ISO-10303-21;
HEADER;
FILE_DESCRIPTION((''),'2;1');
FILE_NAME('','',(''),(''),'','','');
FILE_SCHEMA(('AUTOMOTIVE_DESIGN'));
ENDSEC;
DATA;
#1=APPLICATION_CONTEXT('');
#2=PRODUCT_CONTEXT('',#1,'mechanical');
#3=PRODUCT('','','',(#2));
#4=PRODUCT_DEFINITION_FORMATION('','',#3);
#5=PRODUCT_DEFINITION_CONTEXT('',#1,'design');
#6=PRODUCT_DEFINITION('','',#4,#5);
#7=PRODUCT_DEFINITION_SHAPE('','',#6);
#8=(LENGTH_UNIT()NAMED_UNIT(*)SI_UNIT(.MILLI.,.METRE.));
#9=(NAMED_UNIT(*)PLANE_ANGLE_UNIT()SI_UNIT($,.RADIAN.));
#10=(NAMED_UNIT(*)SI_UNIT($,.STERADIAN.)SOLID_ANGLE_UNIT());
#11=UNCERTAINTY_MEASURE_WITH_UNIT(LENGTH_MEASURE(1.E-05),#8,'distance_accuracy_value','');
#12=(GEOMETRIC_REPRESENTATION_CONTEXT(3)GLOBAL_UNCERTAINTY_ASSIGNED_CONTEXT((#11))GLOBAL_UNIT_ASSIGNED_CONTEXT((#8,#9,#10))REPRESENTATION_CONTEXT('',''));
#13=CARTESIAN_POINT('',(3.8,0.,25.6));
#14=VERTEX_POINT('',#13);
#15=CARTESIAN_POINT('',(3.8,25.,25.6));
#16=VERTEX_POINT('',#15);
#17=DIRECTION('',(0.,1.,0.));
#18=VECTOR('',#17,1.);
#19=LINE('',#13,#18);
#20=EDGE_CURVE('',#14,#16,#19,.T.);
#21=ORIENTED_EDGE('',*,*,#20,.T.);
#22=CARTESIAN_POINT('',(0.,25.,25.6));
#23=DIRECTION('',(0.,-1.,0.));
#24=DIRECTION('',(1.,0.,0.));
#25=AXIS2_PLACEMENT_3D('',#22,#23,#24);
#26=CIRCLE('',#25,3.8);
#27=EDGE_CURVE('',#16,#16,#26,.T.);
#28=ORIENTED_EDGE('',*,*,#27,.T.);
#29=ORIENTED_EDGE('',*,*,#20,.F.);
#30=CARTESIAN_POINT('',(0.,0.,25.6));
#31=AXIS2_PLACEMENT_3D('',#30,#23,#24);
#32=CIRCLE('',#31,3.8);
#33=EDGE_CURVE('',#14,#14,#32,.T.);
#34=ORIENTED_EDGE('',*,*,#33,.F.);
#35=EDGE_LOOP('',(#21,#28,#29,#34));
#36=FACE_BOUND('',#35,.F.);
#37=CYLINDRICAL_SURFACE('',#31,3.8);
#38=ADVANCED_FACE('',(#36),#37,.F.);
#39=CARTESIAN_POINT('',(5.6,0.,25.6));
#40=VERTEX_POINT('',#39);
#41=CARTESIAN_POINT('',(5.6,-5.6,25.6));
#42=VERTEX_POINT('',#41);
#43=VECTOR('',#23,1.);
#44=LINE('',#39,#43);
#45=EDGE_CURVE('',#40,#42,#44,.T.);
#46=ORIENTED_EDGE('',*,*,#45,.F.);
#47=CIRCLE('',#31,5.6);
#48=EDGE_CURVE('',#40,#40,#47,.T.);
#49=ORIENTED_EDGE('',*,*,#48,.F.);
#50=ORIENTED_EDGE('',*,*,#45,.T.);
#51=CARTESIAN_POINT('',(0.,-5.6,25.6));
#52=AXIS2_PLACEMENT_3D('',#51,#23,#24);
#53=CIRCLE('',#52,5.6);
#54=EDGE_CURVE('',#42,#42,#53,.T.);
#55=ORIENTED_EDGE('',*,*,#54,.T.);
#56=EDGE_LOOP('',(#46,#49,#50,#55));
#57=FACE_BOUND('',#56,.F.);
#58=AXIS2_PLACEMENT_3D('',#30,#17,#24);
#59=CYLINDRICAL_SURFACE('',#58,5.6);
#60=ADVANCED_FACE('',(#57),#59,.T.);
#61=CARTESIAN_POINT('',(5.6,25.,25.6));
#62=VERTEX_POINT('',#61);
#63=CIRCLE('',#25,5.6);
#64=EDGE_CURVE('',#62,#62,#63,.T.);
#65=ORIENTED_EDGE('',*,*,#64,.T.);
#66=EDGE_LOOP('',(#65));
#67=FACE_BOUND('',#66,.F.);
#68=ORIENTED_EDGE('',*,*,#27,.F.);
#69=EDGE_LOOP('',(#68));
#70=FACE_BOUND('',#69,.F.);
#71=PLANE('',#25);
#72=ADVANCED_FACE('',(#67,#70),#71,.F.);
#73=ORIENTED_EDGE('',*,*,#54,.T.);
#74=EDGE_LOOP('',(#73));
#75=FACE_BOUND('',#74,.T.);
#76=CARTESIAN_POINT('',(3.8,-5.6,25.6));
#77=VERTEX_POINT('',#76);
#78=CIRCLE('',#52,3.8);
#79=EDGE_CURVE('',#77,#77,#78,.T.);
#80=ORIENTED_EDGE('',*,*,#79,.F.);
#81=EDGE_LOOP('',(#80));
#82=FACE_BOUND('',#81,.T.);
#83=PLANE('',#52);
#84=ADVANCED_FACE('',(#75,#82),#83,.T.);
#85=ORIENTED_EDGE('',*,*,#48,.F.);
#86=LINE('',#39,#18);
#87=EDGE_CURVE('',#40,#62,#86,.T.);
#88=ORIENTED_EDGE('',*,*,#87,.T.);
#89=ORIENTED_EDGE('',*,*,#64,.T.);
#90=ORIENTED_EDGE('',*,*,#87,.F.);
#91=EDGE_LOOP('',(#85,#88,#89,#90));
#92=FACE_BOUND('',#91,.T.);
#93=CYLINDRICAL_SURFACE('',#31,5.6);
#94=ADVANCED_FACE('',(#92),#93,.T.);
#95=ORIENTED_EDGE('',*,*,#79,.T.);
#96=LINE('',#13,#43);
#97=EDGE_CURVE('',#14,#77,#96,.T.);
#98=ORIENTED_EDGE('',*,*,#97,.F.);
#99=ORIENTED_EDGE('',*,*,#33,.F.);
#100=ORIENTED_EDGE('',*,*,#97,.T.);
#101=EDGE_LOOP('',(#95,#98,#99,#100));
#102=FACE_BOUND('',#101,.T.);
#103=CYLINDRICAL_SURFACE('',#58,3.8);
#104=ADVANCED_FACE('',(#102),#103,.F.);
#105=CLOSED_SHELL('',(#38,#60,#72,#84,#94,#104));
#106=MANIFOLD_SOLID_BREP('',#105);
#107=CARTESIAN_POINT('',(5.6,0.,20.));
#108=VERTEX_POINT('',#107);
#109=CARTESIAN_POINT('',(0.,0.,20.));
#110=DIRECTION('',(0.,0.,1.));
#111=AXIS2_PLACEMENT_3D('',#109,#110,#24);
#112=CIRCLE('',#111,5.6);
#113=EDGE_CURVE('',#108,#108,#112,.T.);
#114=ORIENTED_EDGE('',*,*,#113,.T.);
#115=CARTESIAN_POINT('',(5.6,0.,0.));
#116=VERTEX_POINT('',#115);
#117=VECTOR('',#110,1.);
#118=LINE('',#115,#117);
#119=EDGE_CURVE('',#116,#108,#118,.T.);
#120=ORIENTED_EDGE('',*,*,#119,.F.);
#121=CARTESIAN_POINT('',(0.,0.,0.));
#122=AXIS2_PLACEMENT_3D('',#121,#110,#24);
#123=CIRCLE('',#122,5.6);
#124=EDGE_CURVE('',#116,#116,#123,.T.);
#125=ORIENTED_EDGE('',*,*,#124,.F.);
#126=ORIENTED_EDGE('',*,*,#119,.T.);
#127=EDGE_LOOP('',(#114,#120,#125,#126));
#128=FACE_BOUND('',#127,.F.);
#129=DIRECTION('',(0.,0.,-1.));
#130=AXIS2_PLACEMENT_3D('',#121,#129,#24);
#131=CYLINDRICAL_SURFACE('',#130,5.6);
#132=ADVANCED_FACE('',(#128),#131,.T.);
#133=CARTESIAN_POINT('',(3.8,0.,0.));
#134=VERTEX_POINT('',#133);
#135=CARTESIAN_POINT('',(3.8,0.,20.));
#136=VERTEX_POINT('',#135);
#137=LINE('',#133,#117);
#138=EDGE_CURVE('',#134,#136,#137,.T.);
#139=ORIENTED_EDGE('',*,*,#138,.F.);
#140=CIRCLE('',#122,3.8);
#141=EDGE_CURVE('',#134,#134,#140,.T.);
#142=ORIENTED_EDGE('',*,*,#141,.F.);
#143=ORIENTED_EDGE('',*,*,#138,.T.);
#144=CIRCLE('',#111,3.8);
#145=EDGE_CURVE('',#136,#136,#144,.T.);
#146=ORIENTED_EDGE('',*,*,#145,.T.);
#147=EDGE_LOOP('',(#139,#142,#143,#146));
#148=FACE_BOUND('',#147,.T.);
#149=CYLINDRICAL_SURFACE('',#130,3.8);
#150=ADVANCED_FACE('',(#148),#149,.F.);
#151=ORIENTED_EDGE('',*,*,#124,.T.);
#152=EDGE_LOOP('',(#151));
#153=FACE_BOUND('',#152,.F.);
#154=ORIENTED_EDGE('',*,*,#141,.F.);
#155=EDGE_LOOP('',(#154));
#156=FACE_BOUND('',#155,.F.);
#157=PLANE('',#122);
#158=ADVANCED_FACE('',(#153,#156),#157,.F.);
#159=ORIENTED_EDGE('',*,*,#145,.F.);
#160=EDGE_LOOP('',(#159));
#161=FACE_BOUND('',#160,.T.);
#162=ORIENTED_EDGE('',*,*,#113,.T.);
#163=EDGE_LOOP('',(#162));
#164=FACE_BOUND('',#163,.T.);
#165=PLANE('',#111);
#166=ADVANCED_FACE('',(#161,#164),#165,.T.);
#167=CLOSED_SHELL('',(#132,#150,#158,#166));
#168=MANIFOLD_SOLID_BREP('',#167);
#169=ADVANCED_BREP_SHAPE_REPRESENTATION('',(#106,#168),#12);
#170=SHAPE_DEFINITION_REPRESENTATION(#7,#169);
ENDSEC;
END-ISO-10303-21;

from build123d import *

# Parameters (mm, degrees)
F0_R          = 5.6
F0_R_2        = 3.8
F1_DEPTH      = 20
F2_R          = 5.6
F2_R_2        = 3.8
F3_DEPTH      = 25
F3_DEPTH_BACK = 5.6


with BuildPart() as f1:
    # F0 (on Top) → F1 (new body)
    with BuildSketch(Plane.XY):
        Circle(F0_R)
        Circle(F0_R_2, mode=Mode.SUBTRACT)
    extrude(amount=F1_DEPTH)


with BuildPart() as f3:
    # F2 (on Front) → F3 (new body, two sides)
    with BuildSketch(Plane.XZ) as f3_sk:
        with Locations((0, 25.6)):
            Circle(F2_R)
        with Locations((0, 25.6)):
            Circle(F2_R_2, mode=Mode.SUBTRACT)
    extrude(amount=-F3_DEPTH)
    extrude(f3_sk.sketch, amount=F3_DEPTH_BACK)


solid = Compound([f1.part, f3.part])
